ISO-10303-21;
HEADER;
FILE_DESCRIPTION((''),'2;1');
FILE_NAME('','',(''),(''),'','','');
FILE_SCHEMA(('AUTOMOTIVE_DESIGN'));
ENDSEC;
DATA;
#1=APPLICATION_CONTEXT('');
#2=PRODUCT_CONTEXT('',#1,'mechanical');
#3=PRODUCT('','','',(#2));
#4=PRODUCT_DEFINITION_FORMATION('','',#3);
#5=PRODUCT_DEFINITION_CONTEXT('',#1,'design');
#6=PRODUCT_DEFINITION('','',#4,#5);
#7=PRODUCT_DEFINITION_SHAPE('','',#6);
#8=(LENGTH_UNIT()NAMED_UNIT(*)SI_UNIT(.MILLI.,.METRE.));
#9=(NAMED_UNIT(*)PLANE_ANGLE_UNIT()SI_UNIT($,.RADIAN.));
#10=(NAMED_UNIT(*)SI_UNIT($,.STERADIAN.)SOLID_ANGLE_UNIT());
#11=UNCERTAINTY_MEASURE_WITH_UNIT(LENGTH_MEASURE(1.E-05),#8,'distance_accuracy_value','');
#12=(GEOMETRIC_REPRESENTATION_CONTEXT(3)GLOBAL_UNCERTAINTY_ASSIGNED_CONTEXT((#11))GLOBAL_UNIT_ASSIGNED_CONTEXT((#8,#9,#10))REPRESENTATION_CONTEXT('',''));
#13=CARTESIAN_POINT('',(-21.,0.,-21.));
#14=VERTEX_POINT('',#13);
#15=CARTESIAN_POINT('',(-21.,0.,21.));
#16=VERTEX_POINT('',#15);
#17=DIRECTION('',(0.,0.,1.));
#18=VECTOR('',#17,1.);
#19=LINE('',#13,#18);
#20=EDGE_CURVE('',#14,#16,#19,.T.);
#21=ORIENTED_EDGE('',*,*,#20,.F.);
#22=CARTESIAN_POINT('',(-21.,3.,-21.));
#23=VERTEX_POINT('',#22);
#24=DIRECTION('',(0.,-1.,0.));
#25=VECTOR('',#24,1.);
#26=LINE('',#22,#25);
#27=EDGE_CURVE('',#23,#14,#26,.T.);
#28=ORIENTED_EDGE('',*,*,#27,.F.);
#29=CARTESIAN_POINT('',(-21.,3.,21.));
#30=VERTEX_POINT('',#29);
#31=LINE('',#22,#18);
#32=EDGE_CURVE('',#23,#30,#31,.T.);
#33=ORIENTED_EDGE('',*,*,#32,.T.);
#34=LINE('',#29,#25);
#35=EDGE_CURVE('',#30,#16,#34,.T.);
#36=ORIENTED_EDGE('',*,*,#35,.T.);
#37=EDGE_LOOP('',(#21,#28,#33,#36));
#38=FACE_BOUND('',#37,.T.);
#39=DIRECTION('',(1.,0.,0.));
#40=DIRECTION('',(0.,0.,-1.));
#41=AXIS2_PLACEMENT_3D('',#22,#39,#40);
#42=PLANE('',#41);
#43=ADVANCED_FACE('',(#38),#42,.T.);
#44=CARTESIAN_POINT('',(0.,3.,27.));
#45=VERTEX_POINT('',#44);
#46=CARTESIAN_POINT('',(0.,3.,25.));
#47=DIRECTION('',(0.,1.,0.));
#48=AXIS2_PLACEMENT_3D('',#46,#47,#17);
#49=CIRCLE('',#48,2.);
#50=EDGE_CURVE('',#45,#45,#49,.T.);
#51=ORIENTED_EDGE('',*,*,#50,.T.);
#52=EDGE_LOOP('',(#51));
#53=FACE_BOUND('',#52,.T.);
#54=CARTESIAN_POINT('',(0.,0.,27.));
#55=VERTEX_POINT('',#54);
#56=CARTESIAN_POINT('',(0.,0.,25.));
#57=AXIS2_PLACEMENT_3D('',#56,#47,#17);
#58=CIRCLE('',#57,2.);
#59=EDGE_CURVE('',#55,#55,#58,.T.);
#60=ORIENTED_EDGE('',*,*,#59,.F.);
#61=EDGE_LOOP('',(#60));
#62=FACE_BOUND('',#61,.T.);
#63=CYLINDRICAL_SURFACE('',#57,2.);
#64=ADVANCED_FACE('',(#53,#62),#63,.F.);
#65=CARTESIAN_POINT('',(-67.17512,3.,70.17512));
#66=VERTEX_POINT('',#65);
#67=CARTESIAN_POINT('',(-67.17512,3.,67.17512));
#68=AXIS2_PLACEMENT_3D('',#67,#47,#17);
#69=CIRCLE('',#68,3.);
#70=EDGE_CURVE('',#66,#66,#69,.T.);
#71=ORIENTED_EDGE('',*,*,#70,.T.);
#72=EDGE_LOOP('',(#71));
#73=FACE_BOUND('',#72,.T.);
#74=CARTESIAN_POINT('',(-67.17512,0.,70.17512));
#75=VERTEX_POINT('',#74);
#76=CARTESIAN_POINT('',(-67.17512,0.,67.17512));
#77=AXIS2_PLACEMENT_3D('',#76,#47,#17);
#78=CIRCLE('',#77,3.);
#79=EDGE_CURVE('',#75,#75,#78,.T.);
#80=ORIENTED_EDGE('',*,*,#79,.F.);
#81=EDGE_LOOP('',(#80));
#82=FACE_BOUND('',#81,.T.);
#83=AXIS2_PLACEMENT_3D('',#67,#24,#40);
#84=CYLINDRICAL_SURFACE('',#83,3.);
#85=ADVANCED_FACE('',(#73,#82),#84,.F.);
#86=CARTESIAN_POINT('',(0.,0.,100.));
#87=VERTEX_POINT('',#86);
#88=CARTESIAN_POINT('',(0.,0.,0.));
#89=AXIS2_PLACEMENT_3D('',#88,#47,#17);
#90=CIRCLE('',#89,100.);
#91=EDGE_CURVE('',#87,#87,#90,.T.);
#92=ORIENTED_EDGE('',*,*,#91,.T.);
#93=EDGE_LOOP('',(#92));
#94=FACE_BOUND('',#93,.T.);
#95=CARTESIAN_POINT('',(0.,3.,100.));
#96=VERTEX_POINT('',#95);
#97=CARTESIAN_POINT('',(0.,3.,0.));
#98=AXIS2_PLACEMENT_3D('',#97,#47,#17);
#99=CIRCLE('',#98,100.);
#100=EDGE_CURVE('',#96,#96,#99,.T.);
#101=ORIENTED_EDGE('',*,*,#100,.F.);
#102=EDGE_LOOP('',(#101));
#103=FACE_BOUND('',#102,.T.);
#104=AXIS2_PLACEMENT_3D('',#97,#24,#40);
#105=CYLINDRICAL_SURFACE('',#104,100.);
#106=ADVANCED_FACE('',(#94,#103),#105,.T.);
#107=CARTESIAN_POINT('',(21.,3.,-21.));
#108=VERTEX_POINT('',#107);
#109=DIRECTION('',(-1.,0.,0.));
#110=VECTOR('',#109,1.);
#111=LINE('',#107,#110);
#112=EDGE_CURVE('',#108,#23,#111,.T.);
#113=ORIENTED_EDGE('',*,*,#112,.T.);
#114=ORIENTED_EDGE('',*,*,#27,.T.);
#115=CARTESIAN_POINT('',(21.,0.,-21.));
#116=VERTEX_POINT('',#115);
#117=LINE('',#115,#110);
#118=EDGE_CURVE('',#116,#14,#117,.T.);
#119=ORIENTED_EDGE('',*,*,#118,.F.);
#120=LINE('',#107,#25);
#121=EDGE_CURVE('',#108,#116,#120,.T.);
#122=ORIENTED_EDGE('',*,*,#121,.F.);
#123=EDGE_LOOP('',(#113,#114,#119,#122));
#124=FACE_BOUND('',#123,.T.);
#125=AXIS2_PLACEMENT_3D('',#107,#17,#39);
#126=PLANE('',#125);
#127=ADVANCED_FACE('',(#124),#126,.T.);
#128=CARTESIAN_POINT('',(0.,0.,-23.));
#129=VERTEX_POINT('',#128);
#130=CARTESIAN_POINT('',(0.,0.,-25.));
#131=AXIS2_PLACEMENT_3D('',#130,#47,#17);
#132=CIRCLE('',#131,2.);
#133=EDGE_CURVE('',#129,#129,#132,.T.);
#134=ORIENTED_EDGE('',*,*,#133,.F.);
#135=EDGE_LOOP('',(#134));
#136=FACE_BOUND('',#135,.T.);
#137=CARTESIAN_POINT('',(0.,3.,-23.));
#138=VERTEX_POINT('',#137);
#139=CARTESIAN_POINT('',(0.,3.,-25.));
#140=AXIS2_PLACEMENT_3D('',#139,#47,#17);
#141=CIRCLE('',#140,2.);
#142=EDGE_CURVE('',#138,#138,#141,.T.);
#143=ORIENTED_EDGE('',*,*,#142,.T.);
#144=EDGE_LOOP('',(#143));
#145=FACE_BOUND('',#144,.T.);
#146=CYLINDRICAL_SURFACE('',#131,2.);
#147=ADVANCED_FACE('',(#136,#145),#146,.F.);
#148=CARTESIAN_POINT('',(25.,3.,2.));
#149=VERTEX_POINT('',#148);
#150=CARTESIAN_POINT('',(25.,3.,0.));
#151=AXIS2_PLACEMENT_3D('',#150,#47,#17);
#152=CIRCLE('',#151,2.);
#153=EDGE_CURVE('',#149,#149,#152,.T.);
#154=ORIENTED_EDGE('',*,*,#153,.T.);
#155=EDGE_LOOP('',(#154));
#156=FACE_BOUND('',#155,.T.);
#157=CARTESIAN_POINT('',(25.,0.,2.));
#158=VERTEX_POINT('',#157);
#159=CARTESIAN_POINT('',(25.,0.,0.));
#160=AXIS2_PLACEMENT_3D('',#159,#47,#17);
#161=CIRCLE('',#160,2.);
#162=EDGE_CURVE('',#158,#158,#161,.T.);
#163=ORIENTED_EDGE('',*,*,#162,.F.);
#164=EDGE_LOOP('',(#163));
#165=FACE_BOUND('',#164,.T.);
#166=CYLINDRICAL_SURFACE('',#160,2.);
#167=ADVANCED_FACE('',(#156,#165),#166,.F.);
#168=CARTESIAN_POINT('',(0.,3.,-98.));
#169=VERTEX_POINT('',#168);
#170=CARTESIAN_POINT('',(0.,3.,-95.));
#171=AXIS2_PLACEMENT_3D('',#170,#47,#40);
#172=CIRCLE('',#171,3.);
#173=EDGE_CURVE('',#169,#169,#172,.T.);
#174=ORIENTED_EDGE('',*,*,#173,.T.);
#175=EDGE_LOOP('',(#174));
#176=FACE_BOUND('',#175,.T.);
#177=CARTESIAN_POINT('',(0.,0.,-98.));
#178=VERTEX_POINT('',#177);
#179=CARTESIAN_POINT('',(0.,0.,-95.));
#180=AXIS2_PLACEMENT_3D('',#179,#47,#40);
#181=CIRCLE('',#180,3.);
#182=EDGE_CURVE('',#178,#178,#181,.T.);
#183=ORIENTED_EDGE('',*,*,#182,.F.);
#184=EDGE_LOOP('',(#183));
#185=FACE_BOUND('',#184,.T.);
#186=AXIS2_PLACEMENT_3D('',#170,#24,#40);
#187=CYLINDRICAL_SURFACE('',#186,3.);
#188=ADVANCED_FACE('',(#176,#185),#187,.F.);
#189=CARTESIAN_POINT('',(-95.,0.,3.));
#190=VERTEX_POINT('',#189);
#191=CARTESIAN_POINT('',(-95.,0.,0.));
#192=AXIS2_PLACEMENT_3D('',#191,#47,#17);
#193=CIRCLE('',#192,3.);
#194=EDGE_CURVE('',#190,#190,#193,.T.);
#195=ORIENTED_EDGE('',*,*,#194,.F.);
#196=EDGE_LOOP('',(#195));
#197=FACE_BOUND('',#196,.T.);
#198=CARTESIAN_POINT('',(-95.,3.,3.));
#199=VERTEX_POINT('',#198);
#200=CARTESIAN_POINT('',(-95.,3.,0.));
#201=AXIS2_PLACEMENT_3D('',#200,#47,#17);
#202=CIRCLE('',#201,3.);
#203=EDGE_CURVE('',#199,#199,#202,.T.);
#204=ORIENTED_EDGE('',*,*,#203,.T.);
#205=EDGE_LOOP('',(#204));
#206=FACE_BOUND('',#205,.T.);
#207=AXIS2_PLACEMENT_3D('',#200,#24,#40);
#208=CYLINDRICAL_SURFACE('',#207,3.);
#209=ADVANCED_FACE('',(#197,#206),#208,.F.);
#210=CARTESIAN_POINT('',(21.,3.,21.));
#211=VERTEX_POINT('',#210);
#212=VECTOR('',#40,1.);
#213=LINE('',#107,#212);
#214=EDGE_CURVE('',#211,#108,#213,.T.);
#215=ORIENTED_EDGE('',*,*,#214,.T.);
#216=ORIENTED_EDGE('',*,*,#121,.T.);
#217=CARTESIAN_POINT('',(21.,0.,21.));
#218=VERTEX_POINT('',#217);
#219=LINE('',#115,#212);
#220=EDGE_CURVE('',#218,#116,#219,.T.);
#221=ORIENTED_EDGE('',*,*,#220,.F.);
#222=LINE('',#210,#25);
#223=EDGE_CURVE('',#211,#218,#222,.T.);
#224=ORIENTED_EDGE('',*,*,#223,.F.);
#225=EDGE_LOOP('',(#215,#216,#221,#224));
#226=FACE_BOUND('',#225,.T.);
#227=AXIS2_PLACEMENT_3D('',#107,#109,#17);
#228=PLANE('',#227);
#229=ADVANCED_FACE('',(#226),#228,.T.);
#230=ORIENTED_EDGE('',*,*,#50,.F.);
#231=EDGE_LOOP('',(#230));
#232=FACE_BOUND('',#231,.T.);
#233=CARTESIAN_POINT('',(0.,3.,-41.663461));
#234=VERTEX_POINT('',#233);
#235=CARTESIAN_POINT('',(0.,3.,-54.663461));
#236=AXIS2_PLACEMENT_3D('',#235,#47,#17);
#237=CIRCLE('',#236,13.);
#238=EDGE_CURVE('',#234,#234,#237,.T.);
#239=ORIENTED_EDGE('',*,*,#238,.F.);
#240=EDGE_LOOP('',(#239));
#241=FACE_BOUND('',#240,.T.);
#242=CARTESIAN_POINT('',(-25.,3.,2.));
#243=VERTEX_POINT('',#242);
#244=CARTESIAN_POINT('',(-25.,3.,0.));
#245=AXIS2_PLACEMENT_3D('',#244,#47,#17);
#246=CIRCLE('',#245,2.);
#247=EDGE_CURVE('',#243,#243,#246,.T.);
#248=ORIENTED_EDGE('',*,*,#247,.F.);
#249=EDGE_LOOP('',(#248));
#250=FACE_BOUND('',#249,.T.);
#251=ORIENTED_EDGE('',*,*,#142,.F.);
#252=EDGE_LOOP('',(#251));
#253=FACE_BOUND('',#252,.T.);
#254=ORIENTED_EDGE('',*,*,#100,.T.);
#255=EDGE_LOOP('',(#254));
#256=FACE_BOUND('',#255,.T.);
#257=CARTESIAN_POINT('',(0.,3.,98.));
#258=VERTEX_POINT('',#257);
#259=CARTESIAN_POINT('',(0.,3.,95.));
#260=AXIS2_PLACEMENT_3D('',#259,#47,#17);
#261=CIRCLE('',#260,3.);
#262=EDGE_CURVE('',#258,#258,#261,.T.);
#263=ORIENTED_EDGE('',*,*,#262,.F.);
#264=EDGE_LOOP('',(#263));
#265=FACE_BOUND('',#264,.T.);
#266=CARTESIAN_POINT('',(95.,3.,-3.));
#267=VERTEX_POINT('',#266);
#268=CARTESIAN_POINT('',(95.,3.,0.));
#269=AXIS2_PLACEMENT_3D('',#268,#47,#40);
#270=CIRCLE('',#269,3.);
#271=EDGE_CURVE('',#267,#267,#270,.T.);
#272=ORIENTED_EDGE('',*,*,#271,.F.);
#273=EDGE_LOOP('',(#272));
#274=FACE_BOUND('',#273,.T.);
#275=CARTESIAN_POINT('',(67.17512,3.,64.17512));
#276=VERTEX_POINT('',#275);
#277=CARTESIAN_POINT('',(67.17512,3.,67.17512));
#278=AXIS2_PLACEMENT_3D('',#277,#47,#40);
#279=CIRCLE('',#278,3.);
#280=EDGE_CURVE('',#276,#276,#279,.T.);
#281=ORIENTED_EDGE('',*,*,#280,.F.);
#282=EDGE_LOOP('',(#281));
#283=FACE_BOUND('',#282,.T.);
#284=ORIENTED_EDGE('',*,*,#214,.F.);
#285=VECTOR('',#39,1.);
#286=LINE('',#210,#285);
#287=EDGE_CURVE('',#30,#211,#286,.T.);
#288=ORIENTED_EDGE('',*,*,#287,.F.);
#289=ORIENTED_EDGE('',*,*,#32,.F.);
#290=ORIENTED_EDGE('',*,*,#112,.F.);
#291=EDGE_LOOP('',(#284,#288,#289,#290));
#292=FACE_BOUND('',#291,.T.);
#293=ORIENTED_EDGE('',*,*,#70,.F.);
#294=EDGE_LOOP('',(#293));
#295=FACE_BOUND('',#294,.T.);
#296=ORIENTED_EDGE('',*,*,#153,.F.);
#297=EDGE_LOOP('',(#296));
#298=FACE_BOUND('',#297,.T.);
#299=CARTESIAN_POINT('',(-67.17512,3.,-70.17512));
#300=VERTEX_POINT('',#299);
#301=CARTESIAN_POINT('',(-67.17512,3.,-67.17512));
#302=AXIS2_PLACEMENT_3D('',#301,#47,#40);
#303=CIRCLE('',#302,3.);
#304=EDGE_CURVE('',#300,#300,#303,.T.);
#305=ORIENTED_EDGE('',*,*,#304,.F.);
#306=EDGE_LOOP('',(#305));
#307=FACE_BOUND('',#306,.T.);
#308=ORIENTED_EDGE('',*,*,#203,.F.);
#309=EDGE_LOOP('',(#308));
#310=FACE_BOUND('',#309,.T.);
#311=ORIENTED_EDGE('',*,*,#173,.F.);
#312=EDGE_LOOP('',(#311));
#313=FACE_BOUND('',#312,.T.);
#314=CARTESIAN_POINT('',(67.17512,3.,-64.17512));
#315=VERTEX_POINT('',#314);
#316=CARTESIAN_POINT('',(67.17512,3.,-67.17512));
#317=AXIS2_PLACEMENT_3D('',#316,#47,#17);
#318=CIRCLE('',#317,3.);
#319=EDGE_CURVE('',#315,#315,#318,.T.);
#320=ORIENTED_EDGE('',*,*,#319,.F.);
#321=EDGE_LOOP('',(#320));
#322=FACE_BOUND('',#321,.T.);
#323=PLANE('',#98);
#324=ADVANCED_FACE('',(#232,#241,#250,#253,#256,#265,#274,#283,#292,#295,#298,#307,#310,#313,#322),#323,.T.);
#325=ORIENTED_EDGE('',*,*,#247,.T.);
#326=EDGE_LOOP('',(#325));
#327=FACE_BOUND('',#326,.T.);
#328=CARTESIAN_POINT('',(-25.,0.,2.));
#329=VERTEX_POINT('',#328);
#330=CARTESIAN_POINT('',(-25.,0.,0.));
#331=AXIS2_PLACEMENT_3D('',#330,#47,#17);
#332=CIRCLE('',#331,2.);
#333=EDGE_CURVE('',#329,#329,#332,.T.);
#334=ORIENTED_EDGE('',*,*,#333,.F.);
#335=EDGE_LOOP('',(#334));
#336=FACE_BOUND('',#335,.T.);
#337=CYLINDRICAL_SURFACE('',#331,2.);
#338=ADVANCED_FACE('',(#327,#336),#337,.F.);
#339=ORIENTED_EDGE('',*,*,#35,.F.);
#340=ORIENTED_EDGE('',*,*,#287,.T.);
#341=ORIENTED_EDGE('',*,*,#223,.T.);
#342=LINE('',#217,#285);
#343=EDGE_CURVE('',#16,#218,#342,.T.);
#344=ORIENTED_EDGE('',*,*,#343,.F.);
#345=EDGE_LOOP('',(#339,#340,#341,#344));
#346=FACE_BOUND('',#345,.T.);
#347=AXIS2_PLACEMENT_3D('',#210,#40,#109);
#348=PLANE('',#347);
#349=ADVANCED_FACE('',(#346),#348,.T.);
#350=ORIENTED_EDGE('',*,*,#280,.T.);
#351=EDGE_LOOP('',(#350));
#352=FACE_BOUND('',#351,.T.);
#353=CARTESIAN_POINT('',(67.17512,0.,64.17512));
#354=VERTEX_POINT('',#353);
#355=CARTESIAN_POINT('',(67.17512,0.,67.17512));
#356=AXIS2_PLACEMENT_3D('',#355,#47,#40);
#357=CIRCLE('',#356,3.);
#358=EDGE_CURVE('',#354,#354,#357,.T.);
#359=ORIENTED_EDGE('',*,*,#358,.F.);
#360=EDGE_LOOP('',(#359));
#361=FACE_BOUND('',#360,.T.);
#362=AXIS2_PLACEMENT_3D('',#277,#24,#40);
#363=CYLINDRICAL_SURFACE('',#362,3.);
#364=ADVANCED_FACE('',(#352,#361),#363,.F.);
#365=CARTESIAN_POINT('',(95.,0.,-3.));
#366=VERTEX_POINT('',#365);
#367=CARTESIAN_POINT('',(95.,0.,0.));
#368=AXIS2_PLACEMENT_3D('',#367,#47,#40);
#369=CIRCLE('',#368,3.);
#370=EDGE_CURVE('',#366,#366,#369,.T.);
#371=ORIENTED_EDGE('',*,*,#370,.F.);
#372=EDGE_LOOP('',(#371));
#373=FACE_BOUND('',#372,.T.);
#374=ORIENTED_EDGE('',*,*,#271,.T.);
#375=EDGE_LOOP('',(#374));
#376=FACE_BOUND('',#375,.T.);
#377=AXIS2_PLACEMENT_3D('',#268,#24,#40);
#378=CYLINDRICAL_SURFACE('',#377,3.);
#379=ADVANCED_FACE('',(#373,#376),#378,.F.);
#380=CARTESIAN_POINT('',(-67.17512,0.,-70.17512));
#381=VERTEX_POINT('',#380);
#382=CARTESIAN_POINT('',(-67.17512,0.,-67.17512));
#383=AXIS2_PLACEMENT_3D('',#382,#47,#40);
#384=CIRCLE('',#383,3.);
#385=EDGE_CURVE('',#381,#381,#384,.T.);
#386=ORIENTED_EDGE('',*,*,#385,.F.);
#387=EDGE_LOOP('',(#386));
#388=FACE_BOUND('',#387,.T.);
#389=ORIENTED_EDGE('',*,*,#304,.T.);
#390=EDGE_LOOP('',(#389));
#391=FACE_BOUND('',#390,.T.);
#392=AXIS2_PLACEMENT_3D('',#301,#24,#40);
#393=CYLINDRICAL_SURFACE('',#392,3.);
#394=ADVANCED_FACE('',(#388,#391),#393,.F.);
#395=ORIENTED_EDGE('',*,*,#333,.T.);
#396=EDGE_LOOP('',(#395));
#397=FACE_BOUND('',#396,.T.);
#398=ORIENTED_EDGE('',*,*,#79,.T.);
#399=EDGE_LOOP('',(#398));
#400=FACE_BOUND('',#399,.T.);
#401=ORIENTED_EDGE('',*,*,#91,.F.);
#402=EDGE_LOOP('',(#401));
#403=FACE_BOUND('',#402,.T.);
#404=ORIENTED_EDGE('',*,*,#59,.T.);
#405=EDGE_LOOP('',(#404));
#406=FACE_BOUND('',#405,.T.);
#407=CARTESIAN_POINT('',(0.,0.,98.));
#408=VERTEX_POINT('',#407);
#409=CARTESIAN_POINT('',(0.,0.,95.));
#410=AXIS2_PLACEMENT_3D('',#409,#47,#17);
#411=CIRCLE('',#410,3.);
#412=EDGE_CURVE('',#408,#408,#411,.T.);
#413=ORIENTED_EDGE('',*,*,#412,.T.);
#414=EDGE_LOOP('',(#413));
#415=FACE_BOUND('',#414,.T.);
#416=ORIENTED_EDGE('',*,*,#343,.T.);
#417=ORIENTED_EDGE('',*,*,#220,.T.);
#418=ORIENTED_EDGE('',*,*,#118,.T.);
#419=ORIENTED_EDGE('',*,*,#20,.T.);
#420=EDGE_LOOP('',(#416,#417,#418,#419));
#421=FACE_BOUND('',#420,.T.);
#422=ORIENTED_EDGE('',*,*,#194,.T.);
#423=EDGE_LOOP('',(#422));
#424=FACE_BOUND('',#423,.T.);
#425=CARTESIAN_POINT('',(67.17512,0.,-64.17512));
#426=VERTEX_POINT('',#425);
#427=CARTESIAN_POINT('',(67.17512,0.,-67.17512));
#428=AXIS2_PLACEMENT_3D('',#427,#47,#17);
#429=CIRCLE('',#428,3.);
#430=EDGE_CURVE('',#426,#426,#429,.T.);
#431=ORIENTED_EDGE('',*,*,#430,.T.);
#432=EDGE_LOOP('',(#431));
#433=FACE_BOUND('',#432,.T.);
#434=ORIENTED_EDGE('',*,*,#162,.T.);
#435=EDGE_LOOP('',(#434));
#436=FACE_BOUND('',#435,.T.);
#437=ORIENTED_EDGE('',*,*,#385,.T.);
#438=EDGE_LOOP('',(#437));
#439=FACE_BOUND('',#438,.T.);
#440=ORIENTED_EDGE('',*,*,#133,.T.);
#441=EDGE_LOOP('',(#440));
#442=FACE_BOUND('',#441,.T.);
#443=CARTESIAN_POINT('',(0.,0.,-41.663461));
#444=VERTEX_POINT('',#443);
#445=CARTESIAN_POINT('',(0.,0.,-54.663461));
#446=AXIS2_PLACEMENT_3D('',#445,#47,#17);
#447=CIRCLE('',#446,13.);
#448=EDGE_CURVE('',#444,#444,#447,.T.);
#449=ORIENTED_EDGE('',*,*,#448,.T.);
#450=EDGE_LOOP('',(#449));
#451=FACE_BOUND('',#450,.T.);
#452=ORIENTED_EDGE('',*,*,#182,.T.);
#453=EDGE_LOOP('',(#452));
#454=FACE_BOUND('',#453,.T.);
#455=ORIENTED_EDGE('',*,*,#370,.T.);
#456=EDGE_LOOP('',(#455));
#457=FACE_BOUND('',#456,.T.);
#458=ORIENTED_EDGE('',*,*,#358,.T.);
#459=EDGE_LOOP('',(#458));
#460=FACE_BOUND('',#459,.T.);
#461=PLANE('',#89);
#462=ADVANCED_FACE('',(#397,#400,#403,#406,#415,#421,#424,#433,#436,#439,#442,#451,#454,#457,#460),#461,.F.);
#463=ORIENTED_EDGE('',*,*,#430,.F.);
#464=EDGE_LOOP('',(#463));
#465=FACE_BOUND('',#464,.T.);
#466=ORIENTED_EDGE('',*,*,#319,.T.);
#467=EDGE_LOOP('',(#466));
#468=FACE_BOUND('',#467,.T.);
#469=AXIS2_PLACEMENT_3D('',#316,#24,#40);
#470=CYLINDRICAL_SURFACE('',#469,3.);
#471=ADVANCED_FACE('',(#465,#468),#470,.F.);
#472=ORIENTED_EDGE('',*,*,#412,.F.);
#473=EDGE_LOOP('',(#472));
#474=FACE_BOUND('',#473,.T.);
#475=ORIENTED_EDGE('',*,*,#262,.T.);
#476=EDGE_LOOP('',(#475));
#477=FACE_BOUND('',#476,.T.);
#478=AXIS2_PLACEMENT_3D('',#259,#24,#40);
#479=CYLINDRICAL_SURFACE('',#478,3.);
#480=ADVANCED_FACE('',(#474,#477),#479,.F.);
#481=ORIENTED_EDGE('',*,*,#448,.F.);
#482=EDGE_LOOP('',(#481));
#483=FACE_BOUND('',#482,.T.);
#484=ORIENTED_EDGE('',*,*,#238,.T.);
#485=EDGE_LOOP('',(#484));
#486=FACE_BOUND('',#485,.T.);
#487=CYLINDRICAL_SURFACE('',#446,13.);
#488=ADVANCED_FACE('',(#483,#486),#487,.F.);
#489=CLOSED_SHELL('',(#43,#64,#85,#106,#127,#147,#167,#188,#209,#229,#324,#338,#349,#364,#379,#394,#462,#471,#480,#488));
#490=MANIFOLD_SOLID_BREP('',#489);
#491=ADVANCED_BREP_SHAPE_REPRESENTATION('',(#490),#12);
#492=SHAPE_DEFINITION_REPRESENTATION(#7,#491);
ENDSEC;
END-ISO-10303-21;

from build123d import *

# Parameters (mm, degrees)
EXTRUDE_1_OUTLINE_R   = 100
EXTRUDE_1_OUTLINE_R_2 = 3
EXTRUDE_1_OUTLINE_W   = 42
EXTRUDE_1_OUTLINE_H   = 42
EXTRUDE_1_DEPTH       = 3
SKETCH_2_R            = 13
SKETCH_2_R_2          = 2
CUT_EXTRUDE_1_DEPTH   = 3


# Read off the part's stored shape, not the designer's step: Бобышка-Вытянуть1
with BuildPart() as part:
    # Бобышка-Вытянуть1 outline → Бобышка-Вытянуть1 (new body)
    with BuildSketch(Plane(origin=(0, 0, 0), x_dir=(1, 0, 0), z_dir=(0, 1, 0))):
        Circle(EXTRUDE_1_OUTLINE_R)
        with Locations((-67.175120484, -67.175120484)):
            Circle(EXTRUDE_1_OUTLINE_R_2, mode=Mode.SUBTRACT)
        with Locations((0, -95)):
            Circle(EXTRUDE_1_OUTLINE_R_2, mode=Mode.SUBTRACT)
        with Locations((67.175120484, -67.175120484)):
            Circle(EXTRUDE_1_OUTLINE_R_2, mode=Mode.SUBTRACT)
        with Locations((-95, 0)):
            Circle(EXTRUDE_1_OUTLINE_R_2, mode=Mode.SUBTRACT)
        with Locations((-67.175120484, 67.175120484)):
            Circle(EXTRUDE_1_OUTLINE_R_2, mode=Mode.SUBTRACT)
        Rectangle(EXTRUDE_1_OUTLINE_W, EXTRUDE_1_OUTLINE_H, mode=Mode.SUBTRACT)
        with Locations((95, 0)):
            Circle(EXTRUDE_1_OUTLINE_R_2, mode=Mode.SUBTRACT)
        with Locations((0, 95)):
            Circle(EXTRUDE_1_OUTLINE_R_2, mode=Mode.SUBTRACT)
        with Locations((67.175120484, 67.175120484)):
            Circle(EXTRUDE_1_OUTLINE_R_2, mode=Mode.SUBTRACT)
    extrude(amount=EXTRUDE_1_DEPTH)

    # Эскиз2 → Вырез-Вытянуть1 (cut)
    with BuildSketch(Plane(origin=(0, 3, 0), x_dir=(1, 0, 0), z_dir=(0, 1, 0))):
        with Locations(Location((0, 54.663461451, 0), (0, 0, 270))):
            Circle(SKETCH_2_R)
        with Locations(Location((25, 0, 0), (0, 0, 270))):
            Circle(SKETCH_2_R_2)
        with Locations(Location((0, 25, 0), (0, 0, 270))):
            Circle(SKETCH_2_R_2)
        with Locations(Location((-25, 0, 0), (0, 0, 270))):
            Circle(SKETCH_2_R_2)
        with Locations(Location((0, -25, 0), (0, 0, 270))):
            Circle(SKETCH_2_R_2)
    extrude(amount=-CUT_EXTRUDE_1_DEPTH, mode=Mode.SUBTRACT)


solid = part.part
